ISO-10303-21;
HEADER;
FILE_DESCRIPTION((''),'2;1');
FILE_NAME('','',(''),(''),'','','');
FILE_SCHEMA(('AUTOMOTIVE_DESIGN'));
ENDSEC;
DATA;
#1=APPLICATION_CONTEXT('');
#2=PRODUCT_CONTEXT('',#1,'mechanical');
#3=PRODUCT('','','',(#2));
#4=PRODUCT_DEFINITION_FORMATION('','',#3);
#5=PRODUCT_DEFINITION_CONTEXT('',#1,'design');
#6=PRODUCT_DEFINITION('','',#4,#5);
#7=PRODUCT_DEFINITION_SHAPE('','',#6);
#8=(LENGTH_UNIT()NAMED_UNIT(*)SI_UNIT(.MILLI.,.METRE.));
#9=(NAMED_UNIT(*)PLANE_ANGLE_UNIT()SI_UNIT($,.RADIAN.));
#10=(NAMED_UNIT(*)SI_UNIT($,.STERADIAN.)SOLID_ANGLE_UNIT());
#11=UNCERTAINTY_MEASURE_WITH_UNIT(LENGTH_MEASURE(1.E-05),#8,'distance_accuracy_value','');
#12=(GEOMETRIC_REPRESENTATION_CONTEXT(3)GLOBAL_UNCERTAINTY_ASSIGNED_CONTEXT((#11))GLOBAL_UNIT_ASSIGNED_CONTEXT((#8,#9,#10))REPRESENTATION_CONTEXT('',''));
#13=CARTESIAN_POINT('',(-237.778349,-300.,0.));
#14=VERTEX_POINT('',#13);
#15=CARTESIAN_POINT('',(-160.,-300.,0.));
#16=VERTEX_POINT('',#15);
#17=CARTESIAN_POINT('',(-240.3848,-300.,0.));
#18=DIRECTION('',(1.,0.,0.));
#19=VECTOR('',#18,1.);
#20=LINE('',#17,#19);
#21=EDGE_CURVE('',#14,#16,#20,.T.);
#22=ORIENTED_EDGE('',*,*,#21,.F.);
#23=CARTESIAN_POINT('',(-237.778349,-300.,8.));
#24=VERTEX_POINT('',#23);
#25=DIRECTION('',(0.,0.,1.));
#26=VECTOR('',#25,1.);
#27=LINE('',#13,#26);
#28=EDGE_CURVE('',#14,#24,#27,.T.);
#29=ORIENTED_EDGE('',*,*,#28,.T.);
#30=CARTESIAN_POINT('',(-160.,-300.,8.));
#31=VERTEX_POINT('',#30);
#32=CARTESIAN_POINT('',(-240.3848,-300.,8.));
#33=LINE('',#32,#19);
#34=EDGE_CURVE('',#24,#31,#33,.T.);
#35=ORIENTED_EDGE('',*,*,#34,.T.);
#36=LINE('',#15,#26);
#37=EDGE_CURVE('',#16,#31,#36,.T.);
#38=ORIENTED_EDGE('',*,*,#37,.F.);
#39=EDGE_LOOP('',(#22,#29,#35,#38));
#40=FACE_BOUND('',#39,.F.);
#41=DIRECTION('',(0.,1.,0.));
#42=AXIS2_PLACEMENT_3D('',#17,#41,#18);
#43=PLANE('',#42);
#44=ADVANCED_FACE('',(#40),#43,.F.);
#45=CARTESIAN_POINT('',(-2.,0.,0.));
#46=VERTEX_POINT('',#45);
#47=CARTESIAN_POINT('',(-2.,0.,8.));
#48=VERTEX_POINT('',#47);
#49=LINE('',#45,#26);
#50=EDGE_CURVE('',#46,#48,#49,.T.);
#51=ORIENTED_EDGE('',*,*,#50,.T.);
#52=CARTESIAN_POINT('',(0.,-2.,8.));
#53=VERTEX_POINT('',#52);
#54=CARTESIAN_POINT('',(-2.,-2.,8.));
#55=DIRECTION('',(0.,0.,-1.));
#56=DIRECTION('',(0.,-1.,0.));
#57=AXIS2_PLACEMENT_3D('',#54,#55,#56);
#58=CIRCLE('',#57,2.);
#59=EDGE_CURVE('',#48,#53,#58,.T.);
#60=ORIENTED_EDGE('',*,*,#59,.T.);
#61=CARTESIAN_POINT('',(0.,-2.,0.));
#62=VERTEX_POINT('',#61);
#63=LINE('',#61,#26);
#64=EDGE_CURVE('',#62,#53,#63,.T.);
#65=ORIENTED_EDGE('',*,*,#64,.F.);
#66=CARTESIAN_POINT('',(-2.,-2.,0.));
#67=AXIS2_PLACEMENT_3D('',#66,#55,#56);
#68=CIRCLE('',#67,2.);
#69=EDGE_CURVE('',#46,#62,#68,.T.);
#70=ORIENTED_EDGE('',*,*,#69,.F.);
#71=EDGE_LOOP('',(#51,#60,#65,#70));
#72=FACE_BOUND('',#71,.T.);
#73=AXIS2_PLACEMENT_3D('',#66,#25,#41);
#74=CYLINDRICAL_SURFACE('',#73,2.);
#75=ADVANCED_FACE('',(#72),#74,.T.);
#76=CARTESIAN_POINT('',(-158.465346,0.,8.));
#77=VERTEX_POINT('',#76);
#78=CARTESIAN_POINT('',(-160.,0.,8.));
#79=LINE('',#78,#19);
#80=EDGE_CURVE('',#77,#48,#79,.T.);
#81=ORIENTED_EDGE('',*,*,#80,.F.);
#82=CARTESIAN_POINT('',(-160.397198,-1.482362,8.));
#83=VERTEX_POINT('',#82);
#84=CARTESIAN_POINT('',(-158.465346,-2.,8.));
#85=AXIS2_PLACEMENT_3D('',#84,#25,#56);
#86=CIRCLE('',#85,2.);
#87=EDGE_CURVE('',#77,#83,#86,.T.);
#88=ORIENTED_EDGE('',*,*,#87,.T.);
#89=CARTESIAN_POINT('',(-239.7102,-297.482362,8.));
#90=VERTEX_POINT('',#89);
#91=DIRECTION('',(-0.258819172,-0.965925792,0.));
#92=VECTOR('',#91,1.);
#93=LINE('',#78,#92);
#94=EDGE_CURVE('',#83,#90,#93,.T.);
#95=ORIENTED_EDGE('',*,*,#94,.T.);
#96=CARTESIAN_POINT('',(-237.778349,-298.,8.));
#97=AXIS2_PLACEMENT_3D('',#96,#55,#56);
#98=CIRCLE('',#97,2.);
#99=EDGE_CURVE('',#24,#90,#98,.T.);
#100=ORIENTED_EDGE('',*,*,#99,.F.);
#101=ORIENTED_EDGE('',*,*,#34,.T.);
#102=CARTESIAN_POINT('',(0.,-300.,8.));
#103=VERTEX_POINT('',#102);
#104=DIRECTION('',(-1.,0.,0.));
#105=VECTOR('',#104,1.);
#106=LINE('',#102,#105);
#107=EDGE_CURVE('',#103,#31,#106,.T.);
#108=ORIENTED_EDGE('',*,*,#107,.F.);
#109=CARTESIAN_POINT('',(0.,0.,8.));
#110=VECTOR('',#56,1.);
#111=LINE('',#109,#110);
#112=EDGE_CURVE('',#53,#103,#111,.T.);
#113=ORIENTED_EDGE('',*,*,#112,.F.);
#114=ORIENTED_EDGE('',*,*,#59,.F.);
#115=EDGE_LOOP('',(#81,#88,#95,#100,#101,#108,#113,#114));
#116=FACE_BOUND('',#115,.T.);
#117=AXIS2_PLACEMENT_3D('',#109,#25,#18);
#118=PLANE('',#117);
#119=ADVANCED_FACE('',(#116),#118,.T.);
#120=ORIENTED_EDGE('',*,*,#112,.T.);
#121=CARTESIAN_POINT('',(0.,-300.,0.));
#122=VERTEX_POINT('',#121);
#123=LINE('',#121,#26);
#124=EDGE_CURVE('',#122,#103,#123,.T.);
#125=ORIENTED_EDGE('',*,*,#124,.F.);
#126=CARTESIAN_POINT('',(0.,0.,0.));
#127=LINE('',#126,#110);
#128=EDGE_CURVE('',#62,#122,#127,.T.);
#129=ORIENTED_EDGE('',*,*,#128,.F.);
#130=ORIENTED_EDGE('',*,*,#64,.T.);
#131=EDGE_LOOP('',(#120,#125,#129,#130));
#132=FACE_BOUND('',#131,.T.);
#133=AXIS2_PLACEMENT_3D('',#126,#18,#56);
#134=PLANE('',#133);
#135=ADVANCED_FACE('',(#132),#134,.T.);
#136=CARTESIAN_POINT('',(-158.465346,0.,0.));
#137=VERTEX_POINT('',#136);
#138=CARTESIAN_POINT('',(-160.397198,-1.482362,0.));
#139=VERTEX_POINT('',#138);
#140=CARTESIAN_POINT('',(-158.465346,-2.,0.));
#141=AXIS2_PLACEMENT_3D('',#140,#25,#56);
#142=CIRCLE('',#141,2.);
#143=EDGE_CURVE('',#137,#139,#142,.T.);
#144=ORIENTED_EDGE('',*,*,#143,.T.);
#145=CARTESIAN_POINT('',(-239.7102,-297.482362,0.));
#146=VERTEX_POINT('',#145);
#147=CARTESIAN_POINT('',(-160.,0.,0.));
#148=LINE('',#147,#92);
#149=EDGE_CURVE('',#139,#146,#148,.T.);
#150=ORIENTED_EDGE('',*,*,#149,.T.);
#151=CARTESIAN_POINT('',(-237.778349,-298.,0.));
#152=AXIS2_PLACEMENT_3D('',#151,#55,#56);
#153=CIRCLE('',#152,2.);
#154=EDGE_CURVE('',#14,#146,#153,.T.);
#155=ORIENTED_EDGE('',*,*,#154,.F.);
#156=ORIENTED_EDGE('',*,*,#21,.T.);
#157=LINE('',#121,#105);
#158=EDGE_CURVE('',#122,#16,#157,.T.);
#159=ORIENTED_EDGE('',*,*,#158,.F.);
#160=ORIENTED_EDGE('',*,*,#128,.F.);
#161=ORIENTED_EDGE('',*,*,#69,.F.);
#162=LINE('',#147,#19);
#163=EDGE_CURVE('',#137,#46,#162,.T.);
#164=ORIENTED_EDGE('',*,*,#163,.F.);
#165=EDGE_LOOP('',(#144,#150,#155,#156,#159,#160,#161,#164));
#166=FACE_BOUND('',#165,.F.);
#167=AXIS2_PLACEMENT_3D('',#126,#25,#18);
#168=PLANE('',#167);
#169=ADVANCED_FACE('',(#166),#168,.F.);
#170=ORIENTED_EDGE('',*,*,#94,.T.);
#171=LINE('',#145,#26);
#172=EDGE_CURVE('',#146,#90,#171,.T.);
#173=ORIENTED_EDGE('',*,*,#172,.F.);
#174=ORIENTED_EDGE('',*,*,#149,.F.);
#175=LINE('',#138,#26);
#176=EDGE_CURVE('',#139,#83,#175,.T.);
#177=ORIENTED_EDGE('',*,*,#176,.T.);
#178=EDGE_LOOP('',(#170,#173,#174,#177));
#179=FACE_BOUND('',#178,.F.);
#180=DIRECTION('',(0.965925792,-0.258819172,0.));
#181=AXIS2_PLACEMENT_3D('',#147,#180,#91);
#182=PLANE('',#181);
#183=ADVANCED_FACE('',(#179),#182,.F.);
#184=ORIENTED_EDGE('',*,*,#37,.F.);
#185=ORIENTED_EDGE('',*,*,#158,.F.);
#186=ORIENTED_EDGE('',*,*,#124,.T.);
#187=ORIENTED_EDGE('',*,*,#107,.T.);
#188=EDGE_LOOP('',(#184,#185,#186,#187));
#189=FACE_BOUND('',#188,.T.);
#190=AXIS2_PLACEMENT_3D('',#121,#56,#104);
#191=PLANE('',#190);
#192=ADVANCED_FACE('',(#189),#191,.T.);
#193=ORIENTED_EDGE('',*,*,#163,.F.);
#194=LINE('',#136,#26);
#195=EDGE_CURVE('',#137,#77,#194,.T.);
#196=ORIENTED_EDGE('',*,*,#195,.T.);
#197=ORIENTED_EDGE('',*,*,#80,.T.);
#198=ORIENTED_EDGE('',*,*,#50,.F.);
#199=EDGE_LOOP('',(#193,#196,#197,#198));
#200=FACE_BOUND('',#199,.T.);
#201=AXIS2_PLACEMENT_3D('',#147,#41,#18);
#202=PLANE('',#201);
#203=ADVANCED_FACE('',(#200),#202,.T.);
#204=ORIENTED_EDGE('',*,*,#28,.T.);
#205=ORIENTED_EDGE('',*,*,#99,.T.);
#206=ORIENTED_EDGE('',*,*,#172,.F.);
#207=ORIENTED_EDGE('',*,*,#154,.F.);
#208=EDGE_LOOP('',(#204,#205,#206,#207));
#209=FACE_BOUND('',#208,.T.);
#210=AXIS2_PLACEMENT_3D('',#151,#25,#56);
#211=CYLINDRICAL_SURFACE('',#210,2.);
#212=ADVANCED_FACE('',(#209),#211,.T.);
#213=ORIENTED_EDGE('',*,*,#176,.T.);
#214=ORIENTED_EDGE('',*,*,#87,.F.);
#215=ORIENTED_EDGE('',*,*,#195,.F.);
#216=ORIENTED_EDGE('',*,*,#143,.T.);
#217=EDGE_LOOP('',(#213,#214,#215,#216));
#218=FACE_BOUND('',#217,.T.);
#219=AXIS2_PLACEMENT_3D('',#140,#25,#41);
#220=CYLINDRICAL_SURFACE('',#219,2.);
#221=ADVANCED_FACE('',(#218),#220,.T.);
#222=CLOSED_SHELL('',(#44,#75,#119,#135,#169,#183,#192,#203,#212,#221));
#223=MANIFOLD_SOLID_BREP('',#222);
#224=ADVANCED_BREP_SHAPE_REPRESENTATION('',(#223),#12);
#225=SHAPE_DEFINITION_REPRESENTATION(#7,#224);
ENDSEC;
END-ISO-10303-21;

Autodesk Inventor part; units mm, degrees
ref_plane "YZ Plane" through (0, 0, 0) normal (1, 0, 0) x (0, 1, 0)
ref_plane "XZ Plane" through (0, 0, 0) normal (0, 1, 0) x (-1, 0, 0)
ref_plane "XY Plane" through (0, 0, 0) normal (0, 0, 1) x (1, 0, 0)
sketch "Sketch1" plane through (0, 0, 0) normal (0, 0, 1) x (1, 0, 0)
  line L0 (-160, 0) -> (0, 0)
  line L1 (-160, -300) -> (-160, 0) construction
  line L2 (-160, 0) -> (-240.3848, -300)
  line L3 (-240.3848, -300) -> (-160, -300)
  line L4 (0, 0) -> (-80.3848, -300) construction
  line L5 (0, 0) -> (160, 0)
  line L6 (0, 0) -> (0, -300)
  line L7 (0, -300) -> (-160, -300)
  dimension "d2" = 15
  dimension "d29" = 160
  dimension "d40" = 300
  dimension "d41" = 15
extrude "Plate1" add sketch "Sketch1" along normal blind 8
fillet "Corner Round1" radius 2 3 edges at (-240.3848, -300, 4) (0, 0, 4) (-160, 0, 4)
equation "\"d3\" = Thickness"
equation "\"BendRadius\" = Thickness"
equation "\"BendReliefWidth\" = Thickness"
equation "\"BendReliefDepth\" = 0.5 * Thickness"
equation "\"CornerReliefSize\" = 4 * Thickness"
equation "\"MinimumRemnant\" = 2 * Thickness"
equation "\"TransitionRadius\" = BendRadius"
equation "\"JacobiRadiusSize\" = BendRadius"
equation "\"GapSize\" = Thickness"
equation "\"Thickness\" = 8"
properties part number "держатель полки 1"
